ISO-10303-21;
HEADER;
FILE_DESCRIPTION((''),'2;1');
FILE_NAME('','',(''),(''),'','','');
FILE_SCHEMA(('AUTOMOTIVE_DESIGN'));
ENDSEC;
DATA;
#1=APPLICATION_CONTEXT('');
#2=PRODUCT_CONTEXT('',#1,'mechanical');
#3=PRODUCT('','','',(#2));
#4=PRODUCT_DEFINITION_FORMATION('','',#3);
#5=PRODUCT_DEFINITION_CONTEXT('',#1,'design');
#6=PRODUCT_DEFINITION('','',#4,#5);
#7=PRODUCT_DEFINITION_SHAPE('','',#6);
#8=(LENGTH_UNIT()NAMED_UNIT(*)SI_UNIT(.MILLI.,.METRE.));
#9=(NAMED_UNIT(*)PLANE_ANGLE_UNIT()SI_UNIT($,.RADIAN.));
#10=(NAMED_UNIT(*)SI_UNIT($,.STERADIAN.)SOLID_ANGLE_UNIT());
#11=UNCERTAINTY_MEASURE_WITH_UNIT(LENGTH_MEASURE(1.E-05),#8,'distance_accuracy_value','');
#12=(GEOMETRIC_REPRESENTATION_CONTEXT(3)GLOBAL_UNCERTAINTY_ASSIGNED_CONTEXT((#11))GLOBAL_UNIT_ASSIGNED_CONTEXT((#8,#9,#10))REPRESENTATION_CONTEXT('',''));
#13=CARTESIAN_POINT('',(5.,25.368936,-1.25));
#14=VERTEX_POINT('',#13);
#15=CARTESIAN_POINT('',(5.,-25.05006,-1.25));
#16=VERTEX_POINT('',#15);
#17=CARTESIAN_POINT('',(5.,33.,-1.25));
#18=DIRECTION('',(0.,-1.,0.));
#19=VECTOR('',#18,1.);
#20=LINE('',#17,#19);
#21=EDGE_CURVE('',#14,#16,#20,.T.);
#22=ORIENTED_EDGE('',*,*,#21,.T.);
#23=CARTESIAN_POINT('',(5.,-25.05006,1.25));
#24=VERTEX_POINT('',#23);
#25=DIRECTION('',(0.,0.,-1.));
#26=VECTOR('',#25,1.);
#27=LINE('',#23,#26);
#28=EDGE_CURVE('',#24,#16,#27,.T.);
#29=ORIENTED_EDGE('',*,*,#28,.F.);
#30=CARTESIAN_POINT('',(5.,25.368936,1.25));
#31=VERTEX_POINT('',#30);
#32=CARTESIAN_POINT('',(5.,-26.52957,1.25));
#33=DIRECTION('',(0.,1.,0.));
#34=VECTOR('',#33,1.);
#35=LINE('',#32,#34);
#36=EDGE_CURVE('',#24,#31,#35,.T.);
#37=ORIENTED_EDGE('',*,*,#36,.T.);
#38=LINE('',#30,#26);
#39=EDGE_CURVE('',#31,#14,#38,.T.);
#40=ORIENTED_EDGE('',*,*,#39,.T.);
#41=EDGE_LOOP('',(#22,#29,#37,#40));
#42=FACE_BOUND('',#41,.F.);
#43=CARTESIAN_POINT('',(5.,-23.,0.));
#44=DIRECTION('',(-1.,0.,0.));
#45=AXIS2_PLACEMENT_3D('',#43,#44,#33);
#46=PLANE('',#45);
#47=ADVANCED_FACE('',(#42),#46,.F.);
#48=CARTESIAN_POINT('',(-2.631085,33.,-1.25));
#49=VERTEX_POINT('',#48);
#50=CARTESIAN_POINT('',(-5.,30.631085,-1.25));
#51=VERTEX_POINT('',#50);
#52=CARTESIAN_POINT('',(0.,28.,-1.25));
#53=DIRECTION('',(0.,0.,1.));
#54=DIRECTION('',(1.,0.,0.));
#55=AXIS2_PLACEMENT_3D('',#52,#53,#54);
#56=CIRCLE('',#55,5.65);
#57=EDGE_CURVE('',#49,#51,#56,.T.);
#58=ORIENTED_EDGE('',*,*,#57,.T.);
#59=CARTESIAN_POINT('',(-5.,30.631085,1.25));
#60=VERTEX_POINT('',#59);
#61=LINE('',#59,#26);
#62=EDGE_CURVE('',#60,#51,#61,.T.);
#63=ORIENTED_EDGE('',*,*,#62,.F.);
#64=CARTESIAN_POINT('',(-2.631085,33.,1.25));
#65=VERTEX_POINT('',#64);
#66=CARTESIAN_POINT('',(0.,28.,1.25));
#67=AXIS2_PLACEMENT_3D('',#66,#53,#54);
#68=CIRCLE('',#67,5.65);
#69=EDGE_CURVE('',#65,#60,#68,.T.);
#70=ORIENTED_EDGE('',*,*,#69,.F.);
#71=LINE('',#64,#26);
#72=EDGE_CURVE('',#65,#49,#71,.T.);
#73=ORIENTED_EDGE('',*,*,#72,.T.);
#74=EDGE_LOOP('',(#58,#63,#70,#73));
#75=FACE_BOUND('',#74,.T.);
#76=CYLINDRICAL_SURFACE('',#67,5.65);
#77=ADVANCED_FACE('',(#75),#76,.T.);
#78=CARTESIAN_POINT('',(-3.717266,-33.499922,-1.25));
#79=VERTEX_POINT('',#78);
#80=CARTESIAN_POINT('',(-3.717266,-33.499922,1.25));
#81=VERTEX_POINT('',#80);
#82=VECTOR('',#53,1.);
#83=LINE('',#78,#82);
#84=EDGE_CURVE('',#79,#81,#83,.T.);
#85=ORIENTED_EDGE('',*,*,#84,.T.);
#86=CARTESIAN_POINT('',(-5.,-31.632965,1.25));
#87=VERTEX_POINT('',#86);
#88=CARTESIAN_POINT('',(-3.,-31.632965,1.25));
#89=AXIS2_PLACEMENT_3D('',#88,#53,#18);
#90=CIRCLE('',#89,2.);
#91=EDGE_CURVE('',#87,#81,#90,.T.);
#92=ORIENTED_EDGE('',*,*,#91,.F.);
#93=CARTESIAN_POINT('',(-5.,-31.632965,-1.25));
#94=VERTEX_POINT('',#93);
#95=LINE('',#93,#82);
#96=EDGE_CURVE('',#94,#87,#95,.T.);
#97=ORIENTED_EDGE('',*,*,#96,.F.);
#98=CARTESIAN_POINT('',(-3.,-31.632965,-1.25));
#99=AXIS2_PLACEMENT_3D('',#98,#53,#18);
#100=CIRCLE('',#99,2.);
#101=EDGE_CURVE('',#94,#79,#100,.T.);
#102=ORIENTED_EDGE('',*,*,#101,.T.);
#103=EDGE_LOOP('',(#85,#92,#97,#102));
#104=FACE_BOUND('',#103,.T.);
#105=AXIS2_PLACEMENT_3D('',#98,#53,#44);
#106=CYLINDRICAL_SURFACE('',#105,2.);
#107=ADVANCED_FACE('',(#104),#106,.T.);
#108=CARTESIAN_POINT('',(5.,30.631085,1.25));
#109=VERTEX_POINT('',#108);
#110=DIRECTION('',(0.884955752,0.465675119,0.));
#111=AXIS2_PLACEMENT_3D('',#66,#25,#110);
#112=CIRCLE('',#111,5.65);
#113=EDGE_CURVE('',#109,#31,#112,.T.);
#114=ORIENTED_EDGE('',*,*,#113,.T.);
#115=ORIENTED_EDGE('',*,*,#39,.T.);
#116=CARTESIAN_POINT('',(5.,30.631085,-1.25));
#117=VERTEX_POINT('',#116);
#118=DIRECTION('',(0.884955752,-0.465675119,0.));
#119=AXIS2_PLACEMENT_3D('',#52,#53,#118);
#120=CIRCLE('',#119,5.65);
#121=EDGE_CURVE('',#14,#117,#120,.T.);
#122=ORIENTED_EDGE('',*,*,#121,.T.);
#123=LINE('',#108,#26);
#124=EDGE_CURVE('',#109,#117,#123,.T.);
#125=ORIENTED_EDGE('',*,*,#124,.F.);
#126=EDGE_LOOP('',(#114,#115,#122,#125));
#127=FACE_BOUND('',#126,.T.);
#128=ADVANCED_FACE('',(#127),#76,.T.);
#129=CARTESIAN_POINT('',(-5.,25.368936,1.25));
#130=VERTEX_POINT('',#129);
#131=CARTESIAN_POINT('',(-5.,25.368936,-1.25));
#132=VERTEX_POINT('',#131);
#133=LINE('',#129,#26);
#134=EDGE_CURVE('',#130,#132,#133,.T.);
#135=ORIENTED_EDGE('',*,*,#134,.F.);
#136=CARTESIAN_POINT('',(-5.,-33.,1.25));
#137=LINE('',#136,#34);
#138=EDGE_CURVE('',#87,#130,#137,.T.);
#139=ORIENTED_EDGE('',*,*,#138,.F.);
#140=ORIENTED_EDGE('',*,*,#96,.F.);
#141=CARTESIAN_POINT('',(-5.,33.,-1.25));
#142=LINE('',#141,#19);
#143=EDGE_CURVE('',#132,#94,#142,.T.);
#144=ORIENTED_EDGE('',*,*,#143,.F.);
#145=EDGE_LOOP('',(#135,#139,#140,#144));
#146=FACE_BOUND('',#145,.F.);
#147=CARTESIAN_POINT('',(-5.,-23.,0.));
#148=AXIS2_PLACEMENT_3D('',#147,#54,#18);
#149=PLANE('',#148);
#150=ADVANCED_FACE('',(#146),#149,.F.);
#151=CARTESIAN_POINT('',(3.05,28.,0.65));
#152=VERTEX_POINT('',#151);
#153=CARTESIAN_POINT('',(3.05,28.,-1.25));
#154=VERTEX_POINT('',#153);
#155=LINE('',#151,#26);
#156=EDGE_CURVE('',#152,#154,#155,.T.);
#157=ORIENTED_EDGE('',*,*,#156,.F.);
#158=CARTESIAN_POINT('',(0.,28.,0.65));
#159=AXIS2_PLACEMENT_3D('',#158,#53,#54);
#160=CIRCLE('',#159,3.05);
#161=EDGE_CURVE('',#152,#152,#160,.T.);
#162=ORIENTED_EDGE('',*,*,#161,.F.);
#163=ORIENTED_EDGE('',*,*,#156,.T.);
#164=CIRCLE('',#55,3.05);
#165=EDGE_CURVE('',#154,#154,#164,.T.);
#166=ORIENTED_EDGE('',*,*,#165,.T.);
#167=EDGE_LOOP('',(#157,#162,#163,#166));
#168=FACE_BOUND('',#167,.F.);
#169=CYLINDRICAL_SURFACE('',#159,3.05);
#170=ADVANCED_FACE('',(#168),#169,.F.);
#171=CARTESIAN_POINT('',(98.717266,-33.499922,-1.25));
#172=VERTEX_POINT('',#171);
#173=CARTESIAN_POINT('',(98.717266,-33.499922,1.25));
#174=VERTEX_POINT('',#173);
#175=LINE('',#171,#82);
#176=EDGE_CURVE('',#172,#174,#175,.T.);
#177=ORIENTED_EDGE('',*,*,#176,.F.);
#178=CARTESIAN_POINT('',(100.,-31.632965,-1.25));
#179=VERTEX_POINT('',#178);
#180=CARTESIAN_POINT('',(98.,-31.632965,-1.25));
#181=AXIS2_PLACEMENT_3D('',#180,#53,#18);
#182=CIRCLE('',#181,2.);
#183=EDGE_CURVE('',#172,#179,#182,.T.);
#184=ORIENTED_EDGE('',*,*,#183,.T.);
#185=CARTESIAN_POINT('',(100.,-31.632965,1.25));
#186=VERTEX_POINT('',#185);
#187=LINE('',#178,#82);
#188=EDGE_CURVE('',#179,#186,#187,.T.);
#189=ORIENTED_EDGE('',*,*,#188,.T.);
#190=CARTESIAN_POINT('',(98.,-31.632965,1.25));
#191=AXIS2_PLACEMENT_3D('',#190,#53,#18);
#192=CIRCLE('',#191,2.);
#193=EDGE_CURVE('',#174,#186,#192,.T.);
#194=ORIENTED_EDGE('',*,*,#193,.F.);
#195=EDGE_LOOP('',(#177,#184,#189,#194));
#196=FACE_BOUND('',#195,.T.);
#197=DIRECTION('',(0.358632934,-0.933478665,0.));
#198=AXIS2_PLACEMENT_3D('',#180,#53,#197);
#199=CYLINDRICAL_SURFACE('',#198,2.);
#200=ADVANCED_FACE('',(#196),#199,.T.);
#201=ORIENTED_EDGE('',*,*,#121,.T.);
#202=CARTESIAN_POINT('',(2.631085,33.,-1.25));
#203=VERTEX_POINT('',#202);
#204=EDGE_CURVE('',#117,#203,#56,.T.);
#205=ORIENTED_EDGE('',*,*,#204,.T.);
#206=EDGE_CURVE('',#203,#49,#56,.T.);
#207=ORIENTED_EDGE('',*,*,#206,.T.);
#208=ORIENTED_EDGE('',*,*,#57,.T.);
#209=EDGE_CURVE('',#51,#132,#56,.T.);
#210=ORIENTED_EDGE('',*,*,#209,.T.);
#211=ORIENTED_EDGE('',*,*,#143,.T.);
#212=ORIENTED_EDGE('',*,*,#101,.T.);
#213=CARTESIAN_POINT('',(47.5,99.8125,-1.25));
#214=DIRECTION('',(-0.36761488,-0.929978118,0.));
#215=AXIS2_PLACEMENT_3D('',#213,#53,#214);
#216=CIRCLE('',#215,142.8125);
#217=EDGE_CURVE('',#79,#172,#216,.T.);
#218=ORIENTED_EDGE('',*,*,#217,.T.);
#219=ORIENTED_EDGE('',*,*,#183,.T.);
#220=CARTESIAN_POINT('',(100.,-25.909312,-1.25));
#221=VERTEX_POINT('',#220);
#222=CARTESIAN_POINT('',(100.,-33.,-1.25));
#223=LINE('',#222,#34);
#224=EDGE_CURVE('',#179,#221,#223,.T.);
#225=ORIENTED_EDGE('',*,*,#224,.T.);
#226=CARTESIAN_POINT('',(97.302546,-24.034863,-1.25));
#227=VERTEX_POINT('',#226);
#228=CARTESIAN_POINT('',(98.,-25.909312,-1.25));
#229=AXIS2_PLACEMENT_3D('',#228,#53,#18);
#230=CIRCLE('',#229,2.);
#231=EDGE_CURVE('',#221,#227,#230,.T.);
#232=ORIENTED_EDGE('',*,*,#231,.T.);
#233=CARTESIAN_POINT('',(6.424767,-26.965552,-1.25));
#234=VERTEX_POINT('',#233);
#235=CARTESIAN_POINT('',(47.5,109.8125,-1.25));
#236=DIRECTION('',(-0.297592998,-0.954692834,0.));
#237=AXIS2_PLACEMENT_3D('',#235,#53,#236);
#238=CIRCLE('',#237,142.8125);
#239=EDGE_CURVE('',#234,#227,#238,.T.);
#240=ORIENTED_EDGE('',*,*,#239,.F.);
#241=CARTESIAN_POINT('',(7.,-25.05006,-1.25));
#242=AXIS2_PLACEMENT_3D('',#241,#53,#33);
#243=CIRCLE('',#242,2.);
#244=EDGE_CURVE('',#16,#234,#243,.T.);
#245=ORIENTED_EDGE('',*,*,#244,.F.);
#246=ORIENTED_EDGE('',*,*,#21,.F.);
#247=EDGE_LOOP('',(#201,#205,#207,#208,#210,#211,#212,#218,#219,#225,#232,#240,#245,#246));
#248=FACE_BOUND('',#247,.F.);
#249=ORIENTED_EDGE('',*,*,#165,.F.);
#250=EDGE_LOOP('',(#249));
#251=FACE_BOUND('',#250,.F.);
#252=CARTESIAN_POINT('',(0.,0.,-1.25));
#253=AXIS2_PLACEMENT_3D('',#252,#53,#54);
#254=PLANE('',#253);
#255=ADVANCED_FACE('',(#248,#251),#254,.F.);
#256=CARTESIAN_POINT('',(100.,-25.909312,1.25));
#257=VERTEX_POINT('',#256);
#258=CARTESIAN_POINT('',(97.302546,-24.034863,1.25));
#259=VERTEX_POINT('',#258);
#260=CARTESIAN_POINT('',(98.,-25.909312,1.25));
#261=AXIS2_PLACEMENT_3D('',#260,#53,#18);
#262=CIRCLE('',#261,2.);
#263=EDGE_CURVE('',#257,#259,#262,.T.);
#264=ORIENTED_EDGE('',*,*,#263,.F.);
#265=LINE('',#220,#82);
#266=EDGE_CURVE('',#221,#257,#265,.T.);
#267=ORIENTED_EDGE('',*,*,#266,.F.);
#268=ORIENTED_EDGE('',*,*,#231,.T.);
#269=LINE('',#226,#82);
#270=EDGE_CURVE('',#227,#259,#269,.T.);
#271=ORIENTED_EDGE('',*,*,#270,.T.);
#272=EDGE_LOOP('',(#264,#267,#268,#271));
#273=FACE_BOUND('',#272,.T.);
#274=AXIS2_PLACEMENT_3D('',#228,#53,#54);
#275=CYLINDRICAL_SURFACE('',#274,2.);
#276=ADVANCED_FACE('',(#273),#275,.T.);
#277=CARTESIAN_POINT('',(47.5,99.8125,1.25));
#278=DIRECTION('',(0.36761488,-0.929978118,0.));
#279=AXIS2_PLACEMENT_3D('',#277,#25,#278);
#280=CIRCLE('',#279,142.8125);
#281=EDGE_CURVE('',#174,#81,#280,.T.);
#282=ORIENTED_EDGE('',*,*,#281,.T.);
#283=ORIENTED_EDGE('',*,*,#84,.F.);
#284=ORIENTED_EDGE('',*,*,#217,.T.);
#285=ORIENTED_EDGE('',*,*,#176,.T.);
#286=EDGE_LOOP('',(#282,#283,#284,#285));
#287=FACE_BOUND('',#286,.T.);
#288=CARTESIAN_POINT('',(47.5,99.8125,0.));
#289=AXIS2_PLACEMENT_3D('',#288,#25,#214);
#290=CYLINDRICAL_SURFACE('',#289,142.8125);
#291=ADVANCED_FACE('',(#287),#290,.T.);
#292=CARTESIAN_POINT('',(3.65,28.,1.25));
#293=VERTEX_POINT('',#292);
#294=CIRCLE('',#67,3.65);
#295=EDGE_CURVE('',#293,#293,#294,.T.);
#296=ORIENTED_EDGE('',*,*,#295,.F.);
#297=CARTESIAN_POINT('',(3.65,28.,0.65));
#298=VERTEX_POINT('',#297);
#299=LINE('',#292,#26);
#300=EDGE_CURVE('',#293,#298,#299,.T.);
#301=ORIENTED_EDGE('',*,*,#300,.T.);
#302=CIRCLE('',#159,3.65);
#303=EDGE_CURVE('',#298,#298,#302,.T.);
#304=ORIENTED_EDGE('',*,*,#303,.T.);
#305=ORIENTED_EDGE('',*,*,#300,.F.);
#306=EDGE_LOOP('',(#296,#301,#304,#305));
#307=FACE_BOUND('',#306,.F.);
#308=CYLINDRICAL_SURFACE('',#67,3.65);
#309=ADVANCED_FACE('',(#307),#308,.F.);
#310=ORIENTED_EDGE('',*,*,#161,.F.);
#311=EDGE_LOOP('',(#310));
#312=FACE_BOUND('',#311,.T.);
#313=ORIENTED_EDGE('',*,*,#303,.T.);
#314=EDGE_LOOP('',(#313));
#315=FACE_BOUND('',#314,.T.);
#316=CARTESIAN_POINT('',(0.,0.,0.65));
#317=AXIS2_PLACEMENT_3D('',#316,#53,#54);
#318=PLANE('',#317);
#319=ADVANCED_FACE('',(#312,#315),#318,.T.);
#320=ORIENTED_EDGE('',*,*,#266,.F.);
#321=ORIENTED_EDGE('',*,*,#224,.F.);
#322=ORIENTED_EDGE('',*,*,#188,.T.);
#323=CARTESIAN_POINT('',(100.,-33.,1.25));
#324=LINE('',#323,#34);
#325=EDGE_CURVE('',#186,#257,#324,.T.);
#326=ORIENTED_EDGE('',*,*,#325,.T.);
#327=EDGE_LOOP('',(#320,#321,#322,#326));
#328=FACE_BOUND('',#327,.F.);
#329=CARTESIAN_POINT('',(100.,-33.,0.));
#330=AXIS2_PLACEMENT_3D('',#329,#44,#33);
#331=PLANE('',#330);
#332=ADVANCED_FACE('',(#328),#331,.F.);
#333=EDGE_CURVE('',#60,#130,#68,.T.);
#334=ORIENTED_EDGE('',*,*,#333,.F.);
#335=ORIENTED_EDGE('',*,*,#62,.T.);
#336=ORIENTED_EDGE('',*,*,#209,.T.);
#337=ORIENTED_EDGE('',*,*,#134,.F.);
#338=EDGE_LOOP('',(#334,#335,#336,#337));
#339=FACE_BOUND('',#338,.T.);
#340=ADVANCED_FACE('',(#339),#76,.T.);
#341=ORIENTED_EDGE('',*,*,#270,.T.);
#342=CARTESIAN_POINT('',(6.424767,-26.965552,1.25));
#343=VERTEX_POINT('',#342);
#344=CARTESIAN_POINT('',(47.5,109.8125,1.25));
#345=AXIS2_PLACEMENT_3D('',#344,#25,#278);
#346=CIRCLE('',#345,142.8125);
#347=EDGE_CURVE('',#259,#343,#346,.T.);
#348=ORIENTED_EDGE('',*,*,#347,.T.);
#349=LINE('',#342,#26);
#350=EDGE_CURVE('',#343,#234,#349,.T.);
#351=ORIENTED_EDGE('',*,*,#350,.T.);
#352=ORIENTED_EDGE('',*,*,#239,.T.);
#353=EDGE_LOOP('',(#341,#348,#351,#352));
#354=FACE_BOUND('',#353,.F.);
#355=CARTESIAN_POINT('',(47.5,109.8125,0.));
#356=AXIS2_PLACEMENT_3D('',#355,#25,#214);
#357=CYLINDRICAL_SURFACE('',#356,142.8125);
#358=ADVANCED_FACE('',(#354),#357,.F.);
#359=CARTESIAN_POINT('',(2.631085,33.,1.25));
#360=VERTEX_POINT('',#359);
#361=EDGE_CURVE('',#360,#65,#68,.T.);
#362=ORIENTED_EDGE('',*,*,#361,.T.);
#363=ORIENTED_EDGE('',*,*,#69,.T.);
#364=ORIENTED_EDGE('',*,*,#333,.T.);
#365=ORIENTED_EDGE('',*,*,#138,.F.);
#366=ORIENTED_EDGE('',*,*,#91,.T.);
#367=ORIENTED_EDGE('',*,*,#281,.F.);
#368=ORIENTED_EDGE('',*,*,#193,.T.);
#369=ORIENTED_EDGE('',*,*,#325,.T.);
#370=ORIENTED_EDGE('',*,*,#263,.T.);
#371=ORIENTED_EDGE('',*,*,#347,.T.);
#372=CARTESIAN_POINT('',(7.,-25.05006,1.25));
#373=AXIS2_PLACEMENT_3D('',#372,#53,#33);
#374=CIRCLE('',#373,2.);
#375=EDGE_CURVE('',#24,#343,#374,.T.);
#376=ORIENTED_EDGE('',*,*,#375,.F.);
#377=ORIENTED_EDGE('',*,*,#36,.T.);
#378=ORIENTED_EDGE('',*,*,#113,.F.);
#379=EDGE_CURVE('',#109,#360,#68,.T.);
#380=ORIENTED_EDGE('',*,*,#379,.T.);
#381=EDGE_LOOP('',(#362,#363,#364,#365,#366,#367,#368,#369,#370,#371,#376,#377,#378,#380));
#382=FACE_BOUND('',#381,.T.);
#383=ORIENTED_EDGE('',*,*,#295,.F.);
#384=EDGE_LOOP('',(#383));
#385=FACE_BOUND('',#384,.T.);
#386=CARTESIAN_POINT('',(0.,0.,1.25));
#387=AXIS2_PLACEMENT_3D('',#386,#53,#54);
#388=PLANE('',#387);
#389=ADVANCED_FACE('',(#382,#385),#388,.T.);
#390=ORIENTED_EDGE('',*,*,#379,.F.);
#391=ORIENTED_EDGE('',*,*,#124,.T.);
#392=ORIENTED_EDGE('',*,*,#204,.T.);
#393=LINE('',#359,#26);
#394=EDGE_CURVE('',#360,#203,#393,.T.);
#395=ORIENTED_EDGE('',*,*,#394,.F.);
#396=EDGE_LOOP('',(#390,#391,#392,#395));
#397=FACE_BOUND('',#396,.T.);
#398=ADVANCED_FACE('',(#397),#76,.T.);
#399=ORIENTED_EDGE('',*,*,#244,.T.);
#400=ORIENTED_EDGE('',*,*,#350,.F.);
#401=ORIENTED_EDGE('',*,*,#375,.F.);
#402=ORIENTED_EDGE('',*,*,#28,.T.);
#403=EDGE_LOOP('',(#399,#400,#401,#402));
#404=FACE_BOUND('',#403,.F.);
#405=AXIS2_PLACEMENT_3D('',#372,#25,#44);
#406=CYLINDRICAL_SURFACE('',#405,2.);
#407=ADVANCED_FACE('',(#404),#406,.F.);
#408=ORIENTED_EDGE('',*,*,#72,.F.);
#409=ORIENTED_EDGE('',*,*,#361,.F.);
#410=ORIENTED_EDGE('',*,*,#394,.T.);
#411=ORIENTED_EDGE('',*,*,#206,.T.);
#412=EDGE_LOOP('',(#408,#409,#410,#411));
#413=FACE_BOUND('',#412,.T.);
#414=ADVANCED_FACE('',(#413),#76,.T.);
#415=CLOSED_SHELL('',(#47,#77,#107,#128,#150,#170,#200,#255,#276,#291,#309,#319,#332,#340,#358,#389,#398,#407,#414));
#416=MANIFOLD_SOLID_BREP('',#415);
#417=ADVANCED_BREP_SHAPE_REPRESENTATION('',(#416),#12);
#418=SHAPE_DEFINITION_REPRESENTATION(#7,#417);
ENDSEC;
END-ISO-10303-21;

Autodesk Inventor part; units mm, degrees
ref_plane "YZ Plane" through (0, 0, 0) normal (1, 0, 0) x (0, 1, 0)
ref_plane "XZ Plane" through (0, 0, 0) normal (0, 1, 0) x (-1, 0, 0)
ref_plane "XY Plane" through (0, 0, 0) normal (0, 0, 1) x (1, 0, 0)
sketch "スケッチ1" plane through (0, 0, 0) normal (0, 0, 1) x (1, 0, 0)
  line L0 (-5, -33) -> (5, -33)
  line L1 (5, -33) -> (5, 33)
  line L2 (5, 33) -> (-5, 33)
  line L3 (-5, 33) -> (-5, -33)
  line L4 (-5, -33) -> (5, 33) construction
  line L5 (5, -33) -> (-5, 33) construction
  line L6 (-5, -33) -> (100, -33)
  line L7 (100, -33) -> (100, -23)
  line L8 (100, -23) -> (-5, -23)
  line L9 (-5, -23) -> (-5, -33)
  line L10 (47.5, -33) -> (47.5, -43)
  arc A0 (-5, -23) -> (100, -23) centre (47.5, 109.8125) ccw
  arc A1 (-5, -33) -> (100, -33) centre (47.5, 99.8125) ccw
  point P0 (0, 0)
  point P1 (5, -26.5296)
  point P2 (5, -23)
  dimension "d0" = 10
  dimension "d1" = 66
  dimension "d2" = 105
  dimension "d3" = 10
  dimension "d4" = 10
extrude "押し出し1" add sketch "スケッチ1" along normal mid plane 2.5 contours L3 A0 L1 L0 | L0 L6 L10 A1 | L1 A0 L6 | L3 L2 L1 L8 | L8 L1 A0 | L10 L6 A1 | A0 L7 L6 picked at (-0.5654, -23.4196)
sketch "スケッチ2" plane through (0, 0, 1.25) normal (0, 0, 1) x (1, 0, 0)
  line L0 (5, 33) -> (-5, 33) projected
  line L1 (5, -26.5296) -> (5, 33) projected
  circle A0 centre (0, 28) radius 3.05
  circle A1 centre (0, 28) radius 3.65
  point P0 (0, 0)
  dimension "d7" = 5
  dimension "d8" = 5
  dimension "d9" = 6.1
  dimension "d10" = 7.3
extrude "押し出し2" cut sketch "スケッチ2" against normal blind 0.6 contours A0 | A1
sketch "スケッチ3" plane through (0, 28, 0.65) normal (0, 0, 1) x (1, 0, 0)
  circle A0 centre (0, 0) radius 3.05
  point P0 (0, -28)
  dimension "d13" = 6.1
extrude "押し出し3" cut sketch "スケッチ3" against normal blind 1.9
sketch "スケッチ6" plane through (0, 0, 1.25) normal (0, 0, 1) x (1, 0, 0)
  circle A0 centre (0, 28) radius 3.65 projected
  line L0 (-5, 33) -> (-5, -33) projected
  arc A1 (-5, -33) -> (100, -33) centre (47.5, 99.8125) ccw projected
  line L1 (100, -33) -> (100, -23) projected
  arc A2 (5, -26.5296) -> (100, -23) centre (47.5, 109.8125) ccw projected
  line L2 (5, -26.5296) -> (5, 33) projected
  line L3 (5, 33) -> (-5, 33) projected
  circle A3 centre (0, 28) radius 5.65
  point P0 (0, 0)
  point P1 (-5, 25.3689)
  point P2 (-5, 30.6311)
  point P3 (-2.6311, 33)
  point P4 (2.6311, 33)
  point P5 (5, 30.6311)
  point P6 (5, 25.3689)
  dimension "d18" = 11.3
extrude "押し出し5" add sketch "スケッチ6" against normal blind 2.5 contours L0 A3 | A3 L3 | L2 A3
sketch "スケッチ7" plane through (0, 0, 1.25) normal (0, 0, 1) x (1, 0, 0)
  circle A0 centre (0, 28) radius 3.65 projected
  line L0 (-5, 33) -> (-5, 30.6311) projected
  arc A1 (-5, 30.6311) -> (-5, 25.3689) centre (0, 28) ccw projected
  line L1 (-5, 25.3689) -> (-5, -33) projected
  arc A2 (-5, -33) -> (100, -33) centre (47.5, 99.8125) ccw projected
  line L2 (100, -33) -> (100, -23) projected
  arc A3 (5, -26.5296) -> (100, -23) centre (47.5, 109.8125) ccw projected
  line L3 (5, -26.5296) -> (5, 25.3689) projected
  arc A4 (5, 25.3689) -> (5, 30.6311) centre (0, 28) ccw projected
  line L4 (5, 30.6311) -> (5, 33) projected
  line L5 (5, 33) -> (2.6311, 33) projected
  arc A5 (2.6311, 33) -> (-2.6311, 33) centre (0, 28) ccw projected
  line L6 (-2.6311, 33) -> (-5, 33) projected
  circle A6 centre (0, 28) radius 5.65
  point P0 (0, 0)
  point P1 (-2.6311, 33)
  point P2 (2.6311, 33)
extrude "押し出し6" cut sketch "スケッチ7" against normal blind 2.5 contours L6 A6 L0 | L5 L4 A6
fillet "フィレット1" radius 2 4 edges at (-5, -33, 0) (5, -26.5296, 0) (100, -23, 0) (100, -33, 0)
properties part number "指_小"
